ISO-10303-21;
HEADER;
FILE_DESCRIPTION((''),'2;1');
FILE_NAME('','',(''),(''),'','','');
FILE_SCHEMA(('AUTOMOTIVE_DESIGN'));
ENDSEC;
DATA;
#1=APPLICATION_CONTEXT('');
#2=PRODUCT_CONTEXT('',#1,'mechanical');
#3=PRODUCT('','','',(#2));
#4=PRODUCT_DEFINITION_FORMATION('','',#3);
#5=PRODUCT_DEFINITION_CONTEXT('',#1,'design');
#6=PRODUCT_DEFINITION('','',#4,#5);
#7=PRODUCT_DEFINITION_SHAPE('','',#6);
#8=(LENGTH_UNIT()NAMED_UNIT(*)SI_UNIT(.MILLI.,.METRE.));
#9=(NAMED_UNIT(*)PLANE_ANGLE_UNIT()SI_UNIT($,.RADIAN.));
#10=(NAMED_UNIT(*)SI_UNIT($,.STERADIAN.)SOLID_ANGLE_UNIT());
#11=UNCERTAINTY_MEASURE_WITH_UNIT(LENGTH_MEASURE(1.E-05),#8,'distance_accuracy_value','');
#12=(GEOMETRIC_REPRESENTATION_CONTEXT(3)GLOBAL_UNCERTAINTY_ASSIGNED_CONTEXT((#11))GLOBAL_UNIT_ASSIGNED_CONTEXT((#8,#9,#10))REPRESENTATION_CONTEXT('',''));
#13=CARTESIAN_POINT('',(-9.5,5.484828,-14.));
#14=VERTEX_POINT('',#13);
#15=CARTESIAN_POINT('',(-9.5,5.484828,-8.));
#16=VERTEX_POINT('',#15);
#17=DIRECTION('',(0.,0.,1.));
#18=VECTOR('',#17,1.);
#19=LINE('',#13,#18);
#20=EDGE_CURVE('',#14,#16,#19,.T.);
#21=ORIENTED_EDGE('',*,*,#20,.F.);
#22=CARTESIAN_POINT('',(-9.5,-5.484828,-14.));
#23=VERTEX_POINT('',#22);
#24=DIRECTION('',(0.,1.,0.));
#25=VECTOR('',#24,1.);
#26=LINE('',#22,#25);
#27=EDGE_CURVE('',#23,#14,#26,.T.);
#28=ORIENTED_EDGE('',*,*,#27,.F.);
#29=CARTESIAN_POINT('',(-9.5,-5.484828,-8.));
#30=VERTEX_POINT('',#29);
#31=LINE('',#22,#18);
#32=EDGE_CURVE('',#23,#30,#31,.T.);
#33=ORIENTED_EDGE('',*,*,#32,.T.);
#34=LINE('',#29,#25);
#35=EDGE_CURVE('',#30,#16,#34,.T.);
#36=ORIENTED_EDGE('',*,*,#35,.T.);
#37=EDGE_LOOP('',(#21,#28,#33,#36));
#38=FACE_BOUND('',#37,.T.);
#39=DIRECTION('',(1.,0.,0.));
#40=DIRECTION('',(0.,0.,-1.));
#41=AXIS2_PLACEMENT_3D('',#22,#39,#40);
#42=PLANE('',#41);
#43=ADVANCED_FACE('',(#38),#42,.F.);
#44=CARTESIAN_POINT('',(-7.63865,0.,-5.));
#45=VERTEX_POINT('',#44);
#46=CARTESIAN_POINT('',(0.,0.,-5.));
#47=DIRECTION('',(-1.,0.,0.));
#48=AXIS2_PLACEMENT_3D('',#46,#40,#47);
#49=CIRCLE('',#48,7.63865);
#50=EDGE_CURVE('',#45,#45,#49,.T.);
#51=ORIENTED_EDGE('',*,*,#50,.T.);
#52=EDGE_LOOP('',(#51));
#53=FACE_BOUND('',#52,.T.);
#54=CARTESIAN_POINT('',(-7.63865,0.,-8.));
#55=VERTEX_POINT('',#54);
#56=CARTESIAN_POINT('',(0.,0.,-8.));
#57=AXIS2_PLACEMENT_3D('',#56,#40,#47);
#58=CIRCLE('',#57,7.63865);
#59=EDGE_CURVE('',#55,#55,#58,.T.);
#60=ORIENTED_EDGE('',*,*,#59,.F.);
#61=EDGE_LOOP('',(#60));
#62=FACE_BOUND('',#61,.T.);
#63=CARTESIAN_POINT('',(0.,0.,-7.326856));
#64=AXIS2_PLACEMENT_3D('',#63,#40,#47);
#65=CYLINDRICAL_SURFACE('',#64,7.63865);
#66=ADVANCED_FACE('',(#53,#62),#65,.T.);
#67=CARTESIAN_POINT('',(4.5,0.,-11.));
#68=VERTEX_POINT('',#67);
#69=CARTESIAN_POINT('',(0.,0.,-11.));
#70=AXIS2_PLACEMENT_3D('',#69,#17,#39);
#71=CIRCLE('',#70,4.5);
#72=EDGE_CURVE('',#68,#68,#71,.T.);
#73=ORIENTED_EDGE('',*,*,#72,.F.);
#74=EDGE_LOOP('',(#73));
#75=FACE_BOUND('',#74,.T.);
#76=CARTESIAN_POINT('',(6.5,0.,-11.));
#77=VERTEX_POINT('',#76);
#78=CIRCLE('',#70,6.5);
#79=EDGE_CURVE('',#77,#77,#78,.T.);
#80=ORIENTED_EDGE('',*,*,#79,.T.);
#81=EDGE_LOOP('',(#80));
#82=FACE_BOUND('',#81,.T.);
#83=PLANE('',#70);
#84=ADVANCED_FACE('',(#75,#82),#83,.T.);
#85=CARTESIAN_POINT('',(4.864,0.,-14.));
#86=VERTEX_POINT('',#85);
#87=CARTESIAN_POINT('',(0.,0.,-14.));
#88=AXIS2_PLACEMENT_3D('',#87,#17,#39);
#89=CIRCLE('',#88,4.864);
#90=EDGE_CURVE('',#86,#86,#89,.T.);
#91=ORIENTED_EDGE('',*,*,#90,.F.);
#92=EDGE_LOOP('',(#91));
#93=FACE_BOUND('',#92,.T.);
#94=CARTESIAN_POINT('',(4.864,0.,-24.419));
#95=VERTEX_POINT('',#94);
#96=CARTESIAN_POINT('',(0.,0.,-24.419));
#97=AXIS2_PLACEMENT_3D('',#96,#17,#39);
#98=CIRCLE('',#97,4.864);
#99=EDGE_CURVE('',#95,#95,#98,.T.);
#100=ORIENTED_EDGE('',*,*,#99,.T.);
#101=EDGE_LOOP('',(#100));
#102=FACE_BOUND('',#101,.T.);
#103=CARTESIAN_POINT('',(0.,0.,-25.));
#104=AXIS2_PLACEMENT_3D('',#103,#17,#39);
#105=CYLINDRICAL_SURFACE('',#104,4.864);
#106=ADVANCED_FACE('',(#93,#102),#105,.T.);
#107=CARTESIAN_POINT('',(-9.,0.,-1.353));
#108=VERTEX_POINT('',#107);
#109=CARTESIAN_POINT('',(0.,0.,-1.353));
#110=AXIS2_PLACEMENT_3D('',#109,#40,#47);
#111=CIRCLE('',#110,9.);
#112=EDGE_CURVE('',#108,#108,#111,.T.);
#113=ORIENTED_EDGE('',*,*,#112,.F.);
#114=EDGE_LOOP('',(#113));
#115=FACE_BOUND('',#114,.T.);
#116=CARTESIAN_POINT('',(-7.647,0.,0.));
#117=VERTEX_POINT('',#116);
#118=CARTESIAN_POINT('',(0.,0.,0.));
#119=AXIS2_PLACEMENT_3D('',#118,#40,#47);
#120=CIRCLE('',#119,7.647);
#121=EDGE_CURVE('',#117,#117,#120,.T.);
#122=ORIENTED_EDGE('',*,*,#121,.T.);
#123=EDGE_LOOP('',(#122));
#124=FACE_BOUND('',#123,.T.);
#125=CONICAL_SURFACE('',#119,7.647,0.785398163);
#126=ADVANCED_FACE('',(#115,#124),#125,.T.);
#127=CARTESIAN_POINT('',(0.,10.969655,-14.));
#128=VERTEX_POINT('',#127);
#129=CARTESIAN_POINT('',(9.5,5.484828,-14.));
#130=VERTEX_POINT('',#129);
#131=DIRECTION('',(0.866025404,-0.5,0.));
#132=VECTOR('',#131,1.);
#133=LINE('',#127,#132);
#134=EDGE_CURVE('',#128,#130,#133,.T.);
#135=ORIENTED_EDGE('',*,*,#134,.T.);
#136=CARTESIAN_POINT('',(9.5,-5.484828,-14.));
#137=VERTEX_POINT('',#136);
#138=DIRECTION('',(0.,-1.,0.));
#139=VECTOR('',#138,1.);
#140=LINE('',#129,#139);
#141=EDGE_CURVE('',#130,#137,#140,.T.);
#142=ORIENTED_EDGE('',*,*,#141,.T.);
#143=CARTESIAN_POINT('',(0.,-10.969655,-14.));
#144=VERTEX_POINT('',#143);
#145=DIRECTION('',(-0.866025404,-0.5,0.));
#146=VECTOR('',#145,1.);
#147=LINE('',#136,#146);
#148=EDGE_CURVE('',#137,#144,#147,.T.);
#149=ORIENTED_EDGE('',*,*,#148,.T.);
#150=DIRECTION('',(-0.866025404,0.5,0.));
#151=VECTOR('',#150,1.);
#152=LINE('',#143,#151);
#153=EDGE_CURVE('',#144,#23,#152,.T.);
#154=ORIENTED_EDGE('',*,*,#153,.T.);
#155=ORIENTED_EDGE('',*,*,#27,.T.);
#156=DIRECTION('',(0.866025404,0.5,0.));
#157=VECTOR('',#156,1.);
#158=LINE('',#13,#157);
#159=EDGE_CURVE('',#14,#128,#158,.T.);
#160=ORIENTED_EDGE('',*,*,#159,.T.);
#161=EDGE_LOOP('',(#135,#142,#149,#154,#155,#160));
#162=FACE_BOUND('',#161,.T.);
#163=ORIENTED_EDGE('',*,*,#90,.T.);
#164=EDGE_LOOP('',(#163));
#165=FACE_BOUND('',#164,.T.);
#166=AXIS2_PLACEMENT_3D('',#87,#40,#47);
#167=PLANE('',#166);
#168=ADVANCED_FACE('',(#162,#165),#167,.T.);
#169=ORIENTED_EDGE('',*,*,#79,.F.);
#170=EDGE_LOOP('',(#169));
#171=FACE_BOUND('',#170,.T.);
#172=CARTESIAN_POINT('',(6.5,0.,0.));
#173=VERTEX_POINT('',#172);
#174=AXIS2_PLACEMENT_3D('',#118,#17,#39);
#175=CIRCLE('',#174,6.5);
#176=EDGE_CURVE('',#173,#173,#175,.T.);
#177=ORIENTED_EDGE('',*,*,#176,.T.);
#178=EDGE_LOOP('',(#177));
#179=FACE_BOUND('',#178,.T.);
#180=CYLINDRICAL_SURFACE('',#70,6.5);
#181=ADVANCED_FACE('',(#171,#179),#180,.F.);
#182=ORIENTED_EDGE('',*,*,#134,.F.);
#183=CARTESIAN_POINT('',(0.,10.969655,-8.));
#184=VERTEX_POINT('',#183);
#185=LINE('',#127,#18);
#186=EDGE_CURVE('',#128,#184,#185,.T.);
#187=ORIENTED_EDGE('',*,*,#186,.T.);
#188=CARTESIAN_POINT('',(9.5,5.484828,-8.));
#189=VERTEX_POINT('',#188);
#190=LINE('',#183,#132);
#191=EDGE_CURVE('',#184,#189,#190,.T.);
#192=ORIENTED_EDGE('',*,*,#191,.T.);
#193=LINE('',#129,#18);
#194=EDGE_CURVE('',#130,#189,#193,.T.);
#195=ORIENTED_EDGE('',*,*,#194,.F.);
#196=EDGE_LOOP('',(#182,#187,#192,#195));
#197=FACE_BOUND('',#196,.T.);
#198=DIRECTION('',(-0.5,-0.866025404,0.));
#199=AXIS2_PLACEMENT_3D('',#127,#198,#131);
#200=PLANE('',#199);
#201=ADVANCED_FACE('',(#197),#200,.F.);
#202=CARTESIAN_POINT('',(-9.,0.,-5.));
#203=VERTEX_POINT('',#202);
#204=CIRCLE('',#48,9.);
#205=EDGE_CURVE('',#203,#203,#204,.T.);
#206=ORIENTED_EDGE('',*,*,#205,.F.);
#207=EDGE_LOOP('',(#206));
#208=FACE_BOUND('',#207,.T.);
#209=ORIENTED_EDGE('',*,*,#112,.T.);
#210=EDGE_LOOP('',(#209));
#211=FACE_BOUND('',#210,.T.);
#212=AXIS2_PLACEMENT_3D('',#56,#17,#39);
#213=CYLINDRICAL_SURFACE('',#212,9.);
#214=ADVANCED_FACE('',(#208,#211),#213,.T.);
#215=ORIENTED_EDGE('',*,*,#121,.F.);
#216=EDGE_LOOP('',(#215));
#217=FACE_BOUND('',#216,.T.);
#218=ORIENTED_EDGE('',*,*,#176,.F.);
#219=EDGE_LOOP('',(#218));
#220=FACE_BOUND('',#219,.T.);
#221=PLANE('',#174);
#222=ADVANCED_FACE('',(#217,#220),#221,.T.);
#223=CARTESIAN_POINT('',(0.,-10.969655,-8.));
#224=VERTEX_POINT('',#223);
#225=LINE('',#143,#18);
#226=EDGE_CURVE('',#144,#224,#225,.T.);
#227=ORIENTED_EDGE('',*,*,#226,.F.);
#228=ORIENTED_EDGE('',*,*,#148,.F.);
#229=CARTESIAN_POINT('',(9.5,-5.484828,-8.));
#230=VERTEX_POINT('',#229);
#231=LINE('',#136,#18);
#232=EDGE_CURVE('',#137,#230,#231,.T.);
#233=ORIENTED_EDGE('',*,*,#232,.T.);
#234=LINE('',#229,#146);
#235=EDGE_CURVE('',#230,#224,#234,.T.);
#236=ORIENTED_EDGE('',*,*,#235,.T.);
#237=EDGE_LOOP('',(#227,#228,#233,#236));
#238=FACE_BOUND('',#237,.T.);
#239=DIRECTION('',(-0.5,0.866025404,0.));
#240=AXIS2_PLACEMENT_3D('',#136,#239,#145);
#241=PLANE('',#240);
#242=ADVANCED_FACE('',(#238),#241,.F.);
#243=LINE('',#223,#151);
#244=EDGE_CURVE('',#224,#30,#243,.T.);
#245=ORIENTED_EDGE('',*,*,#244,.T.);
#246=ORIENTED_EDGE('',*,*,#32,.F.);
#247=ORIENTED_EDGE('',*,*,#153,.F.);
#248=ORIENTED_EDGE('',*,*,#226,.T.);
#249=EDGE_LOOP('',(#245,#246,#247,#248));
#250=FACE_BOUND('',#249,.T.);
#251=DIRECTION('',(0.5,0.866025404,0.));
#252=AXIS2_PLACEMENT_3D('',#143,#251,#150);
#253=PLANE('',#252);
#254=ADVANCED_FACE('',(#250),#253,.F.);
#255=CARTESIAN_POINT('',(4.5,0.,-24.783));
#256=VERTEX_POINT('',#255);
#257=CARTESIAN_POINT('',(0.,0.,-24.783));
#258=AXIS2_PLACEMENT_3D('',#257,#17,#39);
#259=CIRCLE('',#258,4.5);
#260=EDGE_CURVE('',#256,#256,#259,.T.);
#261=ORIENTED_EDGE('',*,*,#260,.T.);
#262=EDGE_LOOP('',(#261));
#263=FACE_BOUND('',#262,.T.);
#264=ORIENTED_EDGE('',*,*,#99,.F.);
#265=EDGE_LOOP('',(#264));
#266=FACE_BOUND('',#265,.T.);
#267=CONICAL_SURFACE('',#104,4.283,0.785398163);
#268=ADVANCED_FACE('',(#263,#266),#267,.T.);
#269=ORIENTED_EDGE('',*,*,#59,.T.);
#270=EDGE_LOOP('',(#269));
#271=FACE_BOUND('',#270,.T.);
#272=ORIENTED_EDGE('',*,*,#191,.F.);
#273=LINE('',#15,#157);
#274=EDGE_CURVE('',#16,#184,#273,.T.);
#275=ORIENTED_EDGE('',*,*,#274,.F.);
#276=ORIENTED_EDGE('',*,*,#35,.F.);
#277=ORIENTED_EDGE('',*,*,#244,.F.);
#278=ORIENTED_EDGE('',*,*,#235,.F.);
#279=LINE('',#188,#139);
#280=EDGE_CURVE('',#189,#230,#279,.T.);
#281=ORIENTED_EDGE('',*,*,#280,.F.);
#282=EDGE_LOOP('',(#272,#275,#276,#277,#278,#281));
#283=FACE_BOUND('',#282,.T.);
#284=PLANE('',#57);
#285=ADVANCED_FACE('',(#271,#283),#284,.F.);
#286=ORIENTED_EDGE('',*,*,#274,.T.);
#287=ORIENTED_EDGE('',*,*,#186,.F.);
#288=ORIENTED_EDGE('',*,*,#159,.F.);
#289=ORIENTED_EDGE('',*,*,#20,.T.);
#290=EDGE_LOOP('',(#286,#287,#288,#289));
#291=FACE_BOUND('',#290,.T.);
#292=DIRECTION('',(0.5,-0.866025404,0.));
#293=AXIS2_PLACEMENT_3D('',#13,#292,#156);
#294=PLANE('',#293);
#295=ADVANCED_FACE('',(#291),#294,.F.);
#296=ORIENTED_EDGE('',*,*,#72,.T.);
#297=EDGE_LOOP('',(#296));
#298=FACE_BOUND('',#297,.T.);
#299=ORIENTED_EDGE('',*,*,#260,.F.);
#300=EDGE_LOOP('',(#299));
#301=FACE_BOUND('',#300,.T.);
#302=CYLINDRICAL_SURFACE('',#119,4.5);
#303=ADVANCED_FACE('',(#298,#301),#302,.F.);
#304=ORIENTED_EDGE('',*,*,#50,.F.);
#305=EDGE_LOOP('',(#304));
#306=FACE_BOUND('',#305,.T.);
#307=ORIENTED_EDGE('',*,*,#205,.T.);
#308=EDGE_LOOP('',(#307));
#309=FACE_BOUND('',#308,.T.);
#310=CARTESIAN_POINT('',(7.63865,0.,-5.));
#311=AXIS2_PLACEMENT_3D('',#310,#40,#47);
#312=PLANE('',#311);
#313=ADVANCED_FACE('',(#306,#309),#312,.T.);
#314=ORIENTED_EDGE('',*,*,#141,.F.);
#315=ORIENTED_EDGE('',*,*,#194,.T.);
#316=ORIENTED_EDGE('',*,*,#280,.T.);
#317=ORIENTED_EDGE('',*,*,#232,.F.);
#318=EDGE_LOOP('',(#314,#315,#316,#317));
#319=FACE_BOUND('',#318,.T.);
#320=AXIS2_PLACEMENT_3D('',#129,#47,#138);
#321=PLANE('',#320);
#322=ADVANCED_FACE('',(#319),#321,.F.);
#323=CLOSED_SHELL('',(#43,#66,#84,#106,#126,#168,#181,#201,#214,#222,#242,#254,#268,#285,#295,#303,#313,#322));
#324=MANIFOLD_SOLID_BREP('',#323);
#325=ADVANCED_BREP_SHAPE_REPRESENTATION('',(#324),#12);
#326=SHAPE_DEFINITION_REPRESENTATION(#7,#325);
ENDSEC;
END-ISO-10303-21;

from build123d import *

# Parameters (mm, degrees)
SKETCH_1_R          = 9
EXTRUDE_1_DEPTH     = 8
SKETCH_3_R          = 6.5
EXTRUDE_2_DEPTH     = 8
EXTRUDE_3_DEPTH     = 6
SKETCH_5_R          = 6.5
EXTRUDE_4_DEPTH     = 11
SKETCH_8_R          = 6.5
CUT_EXTRUDE_3_DEPTH = 11
SKETCH_9_W          = 1.361349768
SKETCH_9_H          = 3
SKETCH_10_R         = 4.5
CUT_EXTRUDE_4_DEPTH = 29.906458333


# Read off the part's stored shape, not the designer's step: M18 机械螺纹 螺柱1, G1/8 直管螺纹 螺柱1
with BuildPart() as part:
    # 草图1 → 凸台-拉伸1 (new body)
    with BuildSketch(Plane.XY):
        Circle(SKETCH_1_R)
    extrude(amount=-EXTRUDE_1_DEPTH)

    # 草图3 → 凸台-拉伸2 (add)
    with BuildSketch(Plane.XY):
        Circle(SKETCH_3_R)
    extrude(amount=-EXTRUDE_2_DEPTH)

    # 草图4 → 凸台-拉伸3 (add)
    with BuildSketch(Plane(origin=(0, 0, -8), x_dir=(-1, 0, 0), z_dir=(0, 0, -1))):
        Polygon((0, 10.969655115), (-9.5, 5.484827557), (-9.5, -5.484827557), (0, -10.969655115), (9.5, -5.484827557), (9.5, 5.484827557), align=None)
    extrude(amount=EXTRUDE_3_DEPTH)

    # 草图5 → 凸台-拉伸4 (add)
    with BuildSketch(Plane(origin=(0, 0, -14), x_dir=(-1, 0, 0), z_dir=(0, 0, -1))):
        with Locations(Location((0, 0, 0), (0, 0, 180))):
            Circle(SKETCH_5_R)
    extrude(amount=EXTRUDE_4_DEPTH)

    # M18 机械螺纹 螺柱1 outline → M18 机械螺纹 螺柱1 (revolve, cut)
    with BuildSketch(Plane.XZ):
        Polygon((9, 0), (7.647, 0), (9, -1.353), align=None)
    revolve(axis=Axis((0, 0, 0), (0, 0, 1)), mode=Mode.SUBTRACT)

    # G1/8 直管螺纹 螺柱1 outline → G1/8 直管螺纹 螺柱1 (revolve, cut)
    with BuildSketch(Plane.XZ):
        Polygon((6.5, -14), (4.864, -14), (4.864, -24.419), (4.283, -25), (6.5, -25), align=None)
    revolve(axis=Axis((0, 0, 0), (0, 0, 1)), mode=Mode.SUBTRACT)

    # 草图8 → 切除-拉伸3 (cut)
    with BuildSketch(Plane.XY):
        Circle(SKETCH_8_R)
    extrude(amount=-CUT_EXTRUDE_3_DEPTH, mode=Mode.SUBTRACT)

    # 草图9 → 切除-旋转1 (revolve, cut)
    with BuildSketch(Plane(origin=(0, 0, 0), x_dir=(1, 0, 0), z_dir=(0, 1, 0)), mode=Mode.PRIVATE) as cut_revolve_1_sk:
        with Locations((8.319325116, 6.5)):
            Rectangle(SKETCH_9_W, SKETCH_9_H)
    revolve(cut_revolve_1_sk.sketch.rotate(Axis((0, 0, -7.326856085), (0, 0, 1)), 180), axis=Axis((0, 0, -7.326856085), (0, 0, 1)), mode=Mode.SUBTRACT)

    # 草图10 → 切除-拉伸4 (cut, through all)
    with BuildSketch(Plane(origin=(0, 0, -25), x_dir=(-1, 0, 0), z_dir=(0, 0, -1))):
        with Locations(Location((0, 0, 0), (0, 0, 180))):
            Circle(SKETCH_10_R)
    extrude(amount=-CUT_EXTRUDE_4_DEPTH, mode=Mode.SUBTRACT)


solid = part.part
